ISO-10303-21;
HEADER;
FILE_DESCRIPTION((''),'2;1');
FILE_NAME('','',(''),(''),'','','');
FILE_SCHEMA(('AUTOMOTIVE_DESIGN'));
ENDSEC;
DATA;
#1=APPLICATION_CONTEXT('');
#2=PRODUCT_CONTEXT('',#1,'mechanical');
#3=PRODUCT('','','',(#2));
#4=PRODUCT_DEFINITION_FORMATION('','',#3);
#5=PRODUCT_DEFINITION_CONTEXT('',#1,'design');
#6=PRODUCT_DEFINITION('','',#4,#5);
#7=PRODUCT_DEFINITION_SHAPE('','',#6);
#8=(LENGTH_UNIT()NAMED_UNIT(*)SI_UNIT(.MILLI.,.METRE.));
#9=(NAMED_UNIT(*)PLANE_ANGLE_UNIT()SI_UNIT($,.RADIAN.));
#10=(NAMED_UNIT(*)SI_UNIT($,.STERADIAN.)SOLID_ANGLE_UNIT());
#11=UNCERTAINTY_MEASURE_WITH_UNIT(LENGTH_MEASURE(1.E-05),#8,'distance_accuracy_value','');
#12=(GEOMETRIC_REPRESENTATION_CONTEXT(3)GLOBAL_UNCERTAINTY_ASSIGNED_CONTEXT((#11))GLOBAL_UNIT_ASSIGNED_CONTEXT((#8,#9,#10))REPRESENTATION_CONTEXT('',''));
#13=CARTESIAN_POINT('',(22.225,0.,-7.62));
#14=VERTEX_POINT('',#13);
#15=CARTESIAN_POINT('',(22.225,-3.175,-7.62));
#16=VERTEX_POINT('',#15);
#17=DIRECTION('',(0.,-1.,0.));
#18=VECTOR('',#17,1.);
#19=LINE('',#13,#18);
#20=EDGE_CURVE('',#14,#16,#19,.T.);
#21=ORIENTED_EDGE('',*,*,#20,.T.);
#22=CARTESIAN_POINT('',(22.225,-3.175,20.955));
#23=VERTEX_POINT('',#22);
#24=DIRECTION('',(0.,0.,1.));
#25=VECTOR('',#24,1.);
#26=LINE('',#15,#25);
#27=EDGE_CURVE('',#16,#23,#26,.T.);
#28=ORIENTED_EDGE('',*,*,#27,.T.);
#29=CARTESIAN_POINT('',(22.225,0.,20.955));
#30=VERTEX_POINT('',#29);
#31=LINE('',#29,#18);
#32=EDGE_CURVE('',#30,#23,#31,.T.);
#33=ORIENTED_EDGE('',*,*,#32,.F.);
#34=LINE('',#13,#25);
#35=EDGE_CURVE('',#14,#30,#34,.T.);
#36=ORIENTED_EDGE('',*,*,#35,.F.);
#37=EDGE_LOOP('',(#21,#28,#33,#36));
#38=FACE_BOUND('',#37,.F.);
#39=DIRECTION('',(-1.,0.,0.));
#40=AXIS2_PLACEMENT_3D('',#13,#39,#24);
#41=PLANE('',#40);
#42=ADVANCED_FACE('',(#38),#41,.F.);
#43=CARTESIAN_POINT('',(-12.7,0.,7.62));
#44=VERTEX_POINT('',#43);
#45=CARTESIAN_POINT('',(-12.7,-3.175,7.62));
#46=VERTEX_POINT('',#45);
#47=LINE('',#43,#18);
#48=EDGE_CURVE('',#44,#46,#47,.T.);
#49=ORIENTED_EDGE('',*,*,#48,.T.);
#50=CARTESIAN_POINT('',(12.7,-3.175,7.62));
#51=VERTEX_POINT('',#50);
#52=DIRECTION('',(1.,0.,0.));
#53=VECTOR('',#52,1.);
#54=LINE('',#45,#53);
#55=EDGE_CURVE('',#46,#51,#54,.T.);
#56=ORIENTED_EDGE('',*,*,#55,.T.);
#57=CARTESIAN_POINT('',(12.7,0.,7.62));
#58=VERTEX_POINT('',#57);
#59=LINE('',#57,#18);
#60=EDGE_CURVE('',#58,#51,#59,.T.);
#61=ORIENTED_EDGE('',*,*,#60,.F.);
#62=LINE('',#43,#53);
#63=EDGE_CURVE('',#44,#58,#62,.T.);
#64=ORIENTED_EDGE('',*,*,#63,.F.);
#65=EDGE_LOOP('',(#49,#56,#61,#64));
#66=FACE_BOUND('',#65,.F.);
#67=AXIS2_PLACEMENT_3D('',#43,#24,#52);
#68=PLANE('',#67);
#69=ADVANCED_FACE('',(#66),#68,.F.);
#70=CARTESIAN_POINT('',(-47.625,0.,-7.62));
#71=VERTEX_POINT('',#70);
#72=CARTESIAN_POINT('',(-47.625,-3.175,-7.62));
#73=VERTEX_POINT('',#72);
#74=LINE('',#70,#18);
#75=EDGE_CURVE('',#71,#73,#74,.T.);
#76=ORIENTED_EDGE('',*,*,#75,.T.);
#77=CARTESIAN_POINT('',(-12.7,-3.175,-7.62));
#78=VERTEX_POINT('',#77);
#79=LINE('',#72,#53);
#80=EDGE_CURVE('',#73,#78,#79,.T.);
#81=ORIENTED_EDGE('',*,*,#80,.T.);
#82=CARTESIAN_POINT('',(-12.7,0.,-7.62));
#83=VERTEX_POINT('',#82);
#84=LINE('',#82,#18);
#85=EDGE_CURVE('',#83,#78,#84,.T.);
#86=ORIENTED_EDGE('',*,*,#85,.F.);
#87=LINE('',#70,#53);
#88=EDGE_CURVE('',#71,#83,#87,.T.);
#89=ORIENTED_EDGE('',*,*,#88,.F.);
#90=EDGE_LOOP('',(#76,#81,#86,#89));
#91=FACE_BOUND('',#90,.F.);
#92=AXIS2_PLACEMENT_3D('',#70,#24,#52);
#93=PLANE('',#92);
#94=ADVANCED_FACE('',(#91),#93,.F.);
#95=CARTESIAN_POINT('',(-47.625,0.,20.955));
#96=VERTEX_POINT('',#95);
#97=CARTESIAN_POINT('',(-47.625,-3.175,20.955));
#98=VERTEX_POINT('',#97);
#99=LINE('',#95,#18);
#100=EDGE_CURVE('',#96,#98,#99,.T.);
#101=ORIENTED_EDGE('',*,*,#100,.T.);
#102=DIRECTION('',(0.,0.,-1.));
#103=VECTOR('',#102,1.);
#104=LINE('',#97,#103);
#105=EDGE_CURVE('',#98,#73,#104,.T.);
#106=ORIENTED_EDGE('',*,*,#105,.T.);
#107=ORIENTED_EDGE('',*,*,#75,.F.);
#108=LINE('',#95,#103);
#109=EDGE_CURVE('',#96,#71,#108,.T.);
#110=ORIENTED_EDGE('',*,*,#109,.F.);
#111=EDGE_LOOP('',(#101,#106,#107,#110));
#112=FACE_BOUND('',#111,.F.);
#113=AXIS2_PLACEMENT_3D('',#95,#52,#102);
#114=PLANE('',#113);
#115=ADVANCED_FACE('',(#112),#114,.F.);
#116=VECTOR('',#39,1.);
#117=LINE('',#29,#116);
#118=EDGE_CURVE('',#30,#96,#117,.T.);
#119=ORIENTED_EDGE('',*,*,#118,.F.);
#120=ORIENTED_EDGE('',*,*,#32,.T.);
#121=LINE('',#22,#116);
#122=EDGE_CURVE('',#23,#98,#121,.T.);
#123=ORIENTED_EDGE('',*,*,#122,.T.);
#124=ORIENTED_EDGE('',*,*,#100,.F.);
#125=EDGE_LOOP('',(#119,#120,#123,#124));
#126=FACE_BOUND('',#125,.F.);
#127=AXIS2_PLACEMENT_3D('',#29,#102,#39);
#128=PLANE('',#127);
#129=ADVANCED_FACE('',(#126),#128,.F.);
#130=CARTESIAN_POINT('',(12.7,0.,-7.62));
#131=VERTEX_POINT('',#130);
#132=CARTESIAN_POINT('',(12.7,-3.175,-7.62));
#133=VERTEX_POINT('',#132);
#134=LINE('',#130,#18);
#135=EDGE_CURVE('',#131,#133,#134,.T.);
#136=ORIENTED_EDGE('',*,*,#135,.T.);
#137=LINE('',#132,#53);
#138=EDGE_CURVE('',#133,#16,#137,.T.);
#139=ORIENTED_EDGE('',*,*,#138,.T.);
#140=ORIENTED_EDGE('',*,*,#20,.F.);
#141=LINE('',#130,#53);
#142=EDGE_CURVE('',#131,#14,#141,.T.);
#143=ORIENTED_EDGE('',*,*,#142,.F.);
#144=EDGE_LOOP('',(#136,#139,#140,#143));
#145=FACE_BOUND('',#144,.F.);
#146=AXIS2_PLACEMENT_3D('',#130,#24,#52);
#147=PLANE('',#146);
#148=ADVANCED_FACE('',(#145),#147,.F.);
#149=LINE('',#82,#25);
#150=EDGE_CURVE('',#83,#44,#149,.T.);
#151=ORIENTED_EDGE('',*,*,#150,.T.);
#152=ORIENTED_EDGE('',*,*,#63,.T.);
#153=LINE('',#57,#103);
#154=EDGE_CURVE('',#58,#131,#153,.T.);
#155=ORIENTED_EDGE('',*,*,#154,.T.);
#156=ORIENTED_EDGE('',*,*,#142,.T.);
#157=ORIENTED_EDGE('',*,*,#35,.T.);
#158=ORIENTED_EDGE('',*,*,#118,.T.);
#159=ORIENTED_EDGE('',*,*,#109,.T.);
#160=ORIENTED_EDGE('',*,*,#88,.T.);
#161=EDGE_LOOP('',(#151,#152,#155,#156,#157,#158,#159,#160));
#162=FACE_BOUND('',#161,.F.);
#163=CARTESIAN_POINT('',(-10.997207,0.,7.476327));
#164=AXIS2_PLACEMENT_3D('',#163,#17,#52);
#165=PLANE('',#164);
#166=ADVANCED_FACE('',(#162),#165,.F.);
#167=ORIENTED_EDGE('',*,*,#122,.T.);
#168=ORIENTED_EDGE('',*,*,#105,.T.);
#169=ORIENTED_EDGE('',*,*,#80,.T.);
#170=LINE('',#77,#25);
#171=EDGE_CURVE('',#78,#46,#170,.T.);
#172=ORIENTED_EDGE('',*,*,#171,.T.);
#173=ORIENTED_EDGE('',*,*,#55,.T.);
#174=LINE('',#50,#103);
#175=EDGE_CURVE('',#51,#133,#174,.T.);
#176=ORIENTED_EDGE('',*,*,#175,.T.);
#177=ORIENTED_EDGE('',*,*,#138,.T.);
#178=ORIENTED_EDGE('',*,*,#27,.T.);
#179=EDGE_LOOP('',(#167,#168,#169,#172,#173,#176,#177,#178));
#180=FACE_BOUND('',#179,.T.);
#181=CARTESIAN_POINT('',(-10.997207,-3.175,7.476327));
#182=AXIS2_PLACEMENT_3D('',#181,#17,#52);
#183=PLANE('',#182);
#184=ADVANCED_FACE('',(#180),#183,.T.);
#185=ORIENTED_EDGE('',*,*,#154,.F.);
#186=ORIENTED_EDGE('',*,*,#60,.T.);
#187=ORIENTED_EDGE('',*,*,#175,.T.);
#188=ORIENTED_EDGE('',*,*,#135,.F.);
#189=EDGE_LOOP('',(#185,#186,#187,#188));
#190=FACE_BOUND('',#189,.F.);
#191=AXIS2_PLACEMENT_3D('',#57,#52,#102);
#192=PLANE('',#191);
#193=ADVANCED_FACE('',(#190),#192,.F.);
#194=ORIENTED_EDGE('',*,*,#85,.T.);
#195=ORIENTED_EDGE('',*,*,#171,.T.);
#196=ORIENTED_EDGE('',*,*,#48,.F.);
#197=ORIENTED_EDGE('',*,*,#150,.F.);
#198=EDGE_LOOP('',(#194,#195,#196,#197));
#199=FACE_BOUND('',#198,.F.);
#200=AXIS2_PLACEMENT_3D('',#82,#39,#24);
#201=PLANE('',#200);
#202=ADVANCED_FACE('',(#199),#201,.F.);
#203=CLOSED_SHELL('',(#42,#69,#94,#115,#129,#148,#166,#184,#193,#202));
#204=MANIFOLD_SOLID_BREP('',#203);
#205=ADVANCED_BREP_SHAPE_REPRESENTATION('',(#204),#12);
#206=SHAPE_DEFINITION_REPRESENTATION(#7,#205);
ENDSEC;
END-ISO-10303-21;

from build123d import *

# Parameters (mm, degrees)
F1_DEPTH = 3.175


# Not quite as in the source:
# - a feature names something its author has since deleted; it is built from what else it names


with BuildPart() as f1:
    # F0 (on Front) → F1 (new body)
    with BuildSketch(Plane.XZ):
        Polygon((12.7, 0), (12.7, -7.62), (22.225, -7.62), (22.225, 20.955), (-47.625, 20.955), (-47.625, -7.62), (-12.7, -7.62), (-12.7, 7.62), (12.7, 7.62), align=None)
    extrude(amount=F1_DEPTH)


solid = f1.part
